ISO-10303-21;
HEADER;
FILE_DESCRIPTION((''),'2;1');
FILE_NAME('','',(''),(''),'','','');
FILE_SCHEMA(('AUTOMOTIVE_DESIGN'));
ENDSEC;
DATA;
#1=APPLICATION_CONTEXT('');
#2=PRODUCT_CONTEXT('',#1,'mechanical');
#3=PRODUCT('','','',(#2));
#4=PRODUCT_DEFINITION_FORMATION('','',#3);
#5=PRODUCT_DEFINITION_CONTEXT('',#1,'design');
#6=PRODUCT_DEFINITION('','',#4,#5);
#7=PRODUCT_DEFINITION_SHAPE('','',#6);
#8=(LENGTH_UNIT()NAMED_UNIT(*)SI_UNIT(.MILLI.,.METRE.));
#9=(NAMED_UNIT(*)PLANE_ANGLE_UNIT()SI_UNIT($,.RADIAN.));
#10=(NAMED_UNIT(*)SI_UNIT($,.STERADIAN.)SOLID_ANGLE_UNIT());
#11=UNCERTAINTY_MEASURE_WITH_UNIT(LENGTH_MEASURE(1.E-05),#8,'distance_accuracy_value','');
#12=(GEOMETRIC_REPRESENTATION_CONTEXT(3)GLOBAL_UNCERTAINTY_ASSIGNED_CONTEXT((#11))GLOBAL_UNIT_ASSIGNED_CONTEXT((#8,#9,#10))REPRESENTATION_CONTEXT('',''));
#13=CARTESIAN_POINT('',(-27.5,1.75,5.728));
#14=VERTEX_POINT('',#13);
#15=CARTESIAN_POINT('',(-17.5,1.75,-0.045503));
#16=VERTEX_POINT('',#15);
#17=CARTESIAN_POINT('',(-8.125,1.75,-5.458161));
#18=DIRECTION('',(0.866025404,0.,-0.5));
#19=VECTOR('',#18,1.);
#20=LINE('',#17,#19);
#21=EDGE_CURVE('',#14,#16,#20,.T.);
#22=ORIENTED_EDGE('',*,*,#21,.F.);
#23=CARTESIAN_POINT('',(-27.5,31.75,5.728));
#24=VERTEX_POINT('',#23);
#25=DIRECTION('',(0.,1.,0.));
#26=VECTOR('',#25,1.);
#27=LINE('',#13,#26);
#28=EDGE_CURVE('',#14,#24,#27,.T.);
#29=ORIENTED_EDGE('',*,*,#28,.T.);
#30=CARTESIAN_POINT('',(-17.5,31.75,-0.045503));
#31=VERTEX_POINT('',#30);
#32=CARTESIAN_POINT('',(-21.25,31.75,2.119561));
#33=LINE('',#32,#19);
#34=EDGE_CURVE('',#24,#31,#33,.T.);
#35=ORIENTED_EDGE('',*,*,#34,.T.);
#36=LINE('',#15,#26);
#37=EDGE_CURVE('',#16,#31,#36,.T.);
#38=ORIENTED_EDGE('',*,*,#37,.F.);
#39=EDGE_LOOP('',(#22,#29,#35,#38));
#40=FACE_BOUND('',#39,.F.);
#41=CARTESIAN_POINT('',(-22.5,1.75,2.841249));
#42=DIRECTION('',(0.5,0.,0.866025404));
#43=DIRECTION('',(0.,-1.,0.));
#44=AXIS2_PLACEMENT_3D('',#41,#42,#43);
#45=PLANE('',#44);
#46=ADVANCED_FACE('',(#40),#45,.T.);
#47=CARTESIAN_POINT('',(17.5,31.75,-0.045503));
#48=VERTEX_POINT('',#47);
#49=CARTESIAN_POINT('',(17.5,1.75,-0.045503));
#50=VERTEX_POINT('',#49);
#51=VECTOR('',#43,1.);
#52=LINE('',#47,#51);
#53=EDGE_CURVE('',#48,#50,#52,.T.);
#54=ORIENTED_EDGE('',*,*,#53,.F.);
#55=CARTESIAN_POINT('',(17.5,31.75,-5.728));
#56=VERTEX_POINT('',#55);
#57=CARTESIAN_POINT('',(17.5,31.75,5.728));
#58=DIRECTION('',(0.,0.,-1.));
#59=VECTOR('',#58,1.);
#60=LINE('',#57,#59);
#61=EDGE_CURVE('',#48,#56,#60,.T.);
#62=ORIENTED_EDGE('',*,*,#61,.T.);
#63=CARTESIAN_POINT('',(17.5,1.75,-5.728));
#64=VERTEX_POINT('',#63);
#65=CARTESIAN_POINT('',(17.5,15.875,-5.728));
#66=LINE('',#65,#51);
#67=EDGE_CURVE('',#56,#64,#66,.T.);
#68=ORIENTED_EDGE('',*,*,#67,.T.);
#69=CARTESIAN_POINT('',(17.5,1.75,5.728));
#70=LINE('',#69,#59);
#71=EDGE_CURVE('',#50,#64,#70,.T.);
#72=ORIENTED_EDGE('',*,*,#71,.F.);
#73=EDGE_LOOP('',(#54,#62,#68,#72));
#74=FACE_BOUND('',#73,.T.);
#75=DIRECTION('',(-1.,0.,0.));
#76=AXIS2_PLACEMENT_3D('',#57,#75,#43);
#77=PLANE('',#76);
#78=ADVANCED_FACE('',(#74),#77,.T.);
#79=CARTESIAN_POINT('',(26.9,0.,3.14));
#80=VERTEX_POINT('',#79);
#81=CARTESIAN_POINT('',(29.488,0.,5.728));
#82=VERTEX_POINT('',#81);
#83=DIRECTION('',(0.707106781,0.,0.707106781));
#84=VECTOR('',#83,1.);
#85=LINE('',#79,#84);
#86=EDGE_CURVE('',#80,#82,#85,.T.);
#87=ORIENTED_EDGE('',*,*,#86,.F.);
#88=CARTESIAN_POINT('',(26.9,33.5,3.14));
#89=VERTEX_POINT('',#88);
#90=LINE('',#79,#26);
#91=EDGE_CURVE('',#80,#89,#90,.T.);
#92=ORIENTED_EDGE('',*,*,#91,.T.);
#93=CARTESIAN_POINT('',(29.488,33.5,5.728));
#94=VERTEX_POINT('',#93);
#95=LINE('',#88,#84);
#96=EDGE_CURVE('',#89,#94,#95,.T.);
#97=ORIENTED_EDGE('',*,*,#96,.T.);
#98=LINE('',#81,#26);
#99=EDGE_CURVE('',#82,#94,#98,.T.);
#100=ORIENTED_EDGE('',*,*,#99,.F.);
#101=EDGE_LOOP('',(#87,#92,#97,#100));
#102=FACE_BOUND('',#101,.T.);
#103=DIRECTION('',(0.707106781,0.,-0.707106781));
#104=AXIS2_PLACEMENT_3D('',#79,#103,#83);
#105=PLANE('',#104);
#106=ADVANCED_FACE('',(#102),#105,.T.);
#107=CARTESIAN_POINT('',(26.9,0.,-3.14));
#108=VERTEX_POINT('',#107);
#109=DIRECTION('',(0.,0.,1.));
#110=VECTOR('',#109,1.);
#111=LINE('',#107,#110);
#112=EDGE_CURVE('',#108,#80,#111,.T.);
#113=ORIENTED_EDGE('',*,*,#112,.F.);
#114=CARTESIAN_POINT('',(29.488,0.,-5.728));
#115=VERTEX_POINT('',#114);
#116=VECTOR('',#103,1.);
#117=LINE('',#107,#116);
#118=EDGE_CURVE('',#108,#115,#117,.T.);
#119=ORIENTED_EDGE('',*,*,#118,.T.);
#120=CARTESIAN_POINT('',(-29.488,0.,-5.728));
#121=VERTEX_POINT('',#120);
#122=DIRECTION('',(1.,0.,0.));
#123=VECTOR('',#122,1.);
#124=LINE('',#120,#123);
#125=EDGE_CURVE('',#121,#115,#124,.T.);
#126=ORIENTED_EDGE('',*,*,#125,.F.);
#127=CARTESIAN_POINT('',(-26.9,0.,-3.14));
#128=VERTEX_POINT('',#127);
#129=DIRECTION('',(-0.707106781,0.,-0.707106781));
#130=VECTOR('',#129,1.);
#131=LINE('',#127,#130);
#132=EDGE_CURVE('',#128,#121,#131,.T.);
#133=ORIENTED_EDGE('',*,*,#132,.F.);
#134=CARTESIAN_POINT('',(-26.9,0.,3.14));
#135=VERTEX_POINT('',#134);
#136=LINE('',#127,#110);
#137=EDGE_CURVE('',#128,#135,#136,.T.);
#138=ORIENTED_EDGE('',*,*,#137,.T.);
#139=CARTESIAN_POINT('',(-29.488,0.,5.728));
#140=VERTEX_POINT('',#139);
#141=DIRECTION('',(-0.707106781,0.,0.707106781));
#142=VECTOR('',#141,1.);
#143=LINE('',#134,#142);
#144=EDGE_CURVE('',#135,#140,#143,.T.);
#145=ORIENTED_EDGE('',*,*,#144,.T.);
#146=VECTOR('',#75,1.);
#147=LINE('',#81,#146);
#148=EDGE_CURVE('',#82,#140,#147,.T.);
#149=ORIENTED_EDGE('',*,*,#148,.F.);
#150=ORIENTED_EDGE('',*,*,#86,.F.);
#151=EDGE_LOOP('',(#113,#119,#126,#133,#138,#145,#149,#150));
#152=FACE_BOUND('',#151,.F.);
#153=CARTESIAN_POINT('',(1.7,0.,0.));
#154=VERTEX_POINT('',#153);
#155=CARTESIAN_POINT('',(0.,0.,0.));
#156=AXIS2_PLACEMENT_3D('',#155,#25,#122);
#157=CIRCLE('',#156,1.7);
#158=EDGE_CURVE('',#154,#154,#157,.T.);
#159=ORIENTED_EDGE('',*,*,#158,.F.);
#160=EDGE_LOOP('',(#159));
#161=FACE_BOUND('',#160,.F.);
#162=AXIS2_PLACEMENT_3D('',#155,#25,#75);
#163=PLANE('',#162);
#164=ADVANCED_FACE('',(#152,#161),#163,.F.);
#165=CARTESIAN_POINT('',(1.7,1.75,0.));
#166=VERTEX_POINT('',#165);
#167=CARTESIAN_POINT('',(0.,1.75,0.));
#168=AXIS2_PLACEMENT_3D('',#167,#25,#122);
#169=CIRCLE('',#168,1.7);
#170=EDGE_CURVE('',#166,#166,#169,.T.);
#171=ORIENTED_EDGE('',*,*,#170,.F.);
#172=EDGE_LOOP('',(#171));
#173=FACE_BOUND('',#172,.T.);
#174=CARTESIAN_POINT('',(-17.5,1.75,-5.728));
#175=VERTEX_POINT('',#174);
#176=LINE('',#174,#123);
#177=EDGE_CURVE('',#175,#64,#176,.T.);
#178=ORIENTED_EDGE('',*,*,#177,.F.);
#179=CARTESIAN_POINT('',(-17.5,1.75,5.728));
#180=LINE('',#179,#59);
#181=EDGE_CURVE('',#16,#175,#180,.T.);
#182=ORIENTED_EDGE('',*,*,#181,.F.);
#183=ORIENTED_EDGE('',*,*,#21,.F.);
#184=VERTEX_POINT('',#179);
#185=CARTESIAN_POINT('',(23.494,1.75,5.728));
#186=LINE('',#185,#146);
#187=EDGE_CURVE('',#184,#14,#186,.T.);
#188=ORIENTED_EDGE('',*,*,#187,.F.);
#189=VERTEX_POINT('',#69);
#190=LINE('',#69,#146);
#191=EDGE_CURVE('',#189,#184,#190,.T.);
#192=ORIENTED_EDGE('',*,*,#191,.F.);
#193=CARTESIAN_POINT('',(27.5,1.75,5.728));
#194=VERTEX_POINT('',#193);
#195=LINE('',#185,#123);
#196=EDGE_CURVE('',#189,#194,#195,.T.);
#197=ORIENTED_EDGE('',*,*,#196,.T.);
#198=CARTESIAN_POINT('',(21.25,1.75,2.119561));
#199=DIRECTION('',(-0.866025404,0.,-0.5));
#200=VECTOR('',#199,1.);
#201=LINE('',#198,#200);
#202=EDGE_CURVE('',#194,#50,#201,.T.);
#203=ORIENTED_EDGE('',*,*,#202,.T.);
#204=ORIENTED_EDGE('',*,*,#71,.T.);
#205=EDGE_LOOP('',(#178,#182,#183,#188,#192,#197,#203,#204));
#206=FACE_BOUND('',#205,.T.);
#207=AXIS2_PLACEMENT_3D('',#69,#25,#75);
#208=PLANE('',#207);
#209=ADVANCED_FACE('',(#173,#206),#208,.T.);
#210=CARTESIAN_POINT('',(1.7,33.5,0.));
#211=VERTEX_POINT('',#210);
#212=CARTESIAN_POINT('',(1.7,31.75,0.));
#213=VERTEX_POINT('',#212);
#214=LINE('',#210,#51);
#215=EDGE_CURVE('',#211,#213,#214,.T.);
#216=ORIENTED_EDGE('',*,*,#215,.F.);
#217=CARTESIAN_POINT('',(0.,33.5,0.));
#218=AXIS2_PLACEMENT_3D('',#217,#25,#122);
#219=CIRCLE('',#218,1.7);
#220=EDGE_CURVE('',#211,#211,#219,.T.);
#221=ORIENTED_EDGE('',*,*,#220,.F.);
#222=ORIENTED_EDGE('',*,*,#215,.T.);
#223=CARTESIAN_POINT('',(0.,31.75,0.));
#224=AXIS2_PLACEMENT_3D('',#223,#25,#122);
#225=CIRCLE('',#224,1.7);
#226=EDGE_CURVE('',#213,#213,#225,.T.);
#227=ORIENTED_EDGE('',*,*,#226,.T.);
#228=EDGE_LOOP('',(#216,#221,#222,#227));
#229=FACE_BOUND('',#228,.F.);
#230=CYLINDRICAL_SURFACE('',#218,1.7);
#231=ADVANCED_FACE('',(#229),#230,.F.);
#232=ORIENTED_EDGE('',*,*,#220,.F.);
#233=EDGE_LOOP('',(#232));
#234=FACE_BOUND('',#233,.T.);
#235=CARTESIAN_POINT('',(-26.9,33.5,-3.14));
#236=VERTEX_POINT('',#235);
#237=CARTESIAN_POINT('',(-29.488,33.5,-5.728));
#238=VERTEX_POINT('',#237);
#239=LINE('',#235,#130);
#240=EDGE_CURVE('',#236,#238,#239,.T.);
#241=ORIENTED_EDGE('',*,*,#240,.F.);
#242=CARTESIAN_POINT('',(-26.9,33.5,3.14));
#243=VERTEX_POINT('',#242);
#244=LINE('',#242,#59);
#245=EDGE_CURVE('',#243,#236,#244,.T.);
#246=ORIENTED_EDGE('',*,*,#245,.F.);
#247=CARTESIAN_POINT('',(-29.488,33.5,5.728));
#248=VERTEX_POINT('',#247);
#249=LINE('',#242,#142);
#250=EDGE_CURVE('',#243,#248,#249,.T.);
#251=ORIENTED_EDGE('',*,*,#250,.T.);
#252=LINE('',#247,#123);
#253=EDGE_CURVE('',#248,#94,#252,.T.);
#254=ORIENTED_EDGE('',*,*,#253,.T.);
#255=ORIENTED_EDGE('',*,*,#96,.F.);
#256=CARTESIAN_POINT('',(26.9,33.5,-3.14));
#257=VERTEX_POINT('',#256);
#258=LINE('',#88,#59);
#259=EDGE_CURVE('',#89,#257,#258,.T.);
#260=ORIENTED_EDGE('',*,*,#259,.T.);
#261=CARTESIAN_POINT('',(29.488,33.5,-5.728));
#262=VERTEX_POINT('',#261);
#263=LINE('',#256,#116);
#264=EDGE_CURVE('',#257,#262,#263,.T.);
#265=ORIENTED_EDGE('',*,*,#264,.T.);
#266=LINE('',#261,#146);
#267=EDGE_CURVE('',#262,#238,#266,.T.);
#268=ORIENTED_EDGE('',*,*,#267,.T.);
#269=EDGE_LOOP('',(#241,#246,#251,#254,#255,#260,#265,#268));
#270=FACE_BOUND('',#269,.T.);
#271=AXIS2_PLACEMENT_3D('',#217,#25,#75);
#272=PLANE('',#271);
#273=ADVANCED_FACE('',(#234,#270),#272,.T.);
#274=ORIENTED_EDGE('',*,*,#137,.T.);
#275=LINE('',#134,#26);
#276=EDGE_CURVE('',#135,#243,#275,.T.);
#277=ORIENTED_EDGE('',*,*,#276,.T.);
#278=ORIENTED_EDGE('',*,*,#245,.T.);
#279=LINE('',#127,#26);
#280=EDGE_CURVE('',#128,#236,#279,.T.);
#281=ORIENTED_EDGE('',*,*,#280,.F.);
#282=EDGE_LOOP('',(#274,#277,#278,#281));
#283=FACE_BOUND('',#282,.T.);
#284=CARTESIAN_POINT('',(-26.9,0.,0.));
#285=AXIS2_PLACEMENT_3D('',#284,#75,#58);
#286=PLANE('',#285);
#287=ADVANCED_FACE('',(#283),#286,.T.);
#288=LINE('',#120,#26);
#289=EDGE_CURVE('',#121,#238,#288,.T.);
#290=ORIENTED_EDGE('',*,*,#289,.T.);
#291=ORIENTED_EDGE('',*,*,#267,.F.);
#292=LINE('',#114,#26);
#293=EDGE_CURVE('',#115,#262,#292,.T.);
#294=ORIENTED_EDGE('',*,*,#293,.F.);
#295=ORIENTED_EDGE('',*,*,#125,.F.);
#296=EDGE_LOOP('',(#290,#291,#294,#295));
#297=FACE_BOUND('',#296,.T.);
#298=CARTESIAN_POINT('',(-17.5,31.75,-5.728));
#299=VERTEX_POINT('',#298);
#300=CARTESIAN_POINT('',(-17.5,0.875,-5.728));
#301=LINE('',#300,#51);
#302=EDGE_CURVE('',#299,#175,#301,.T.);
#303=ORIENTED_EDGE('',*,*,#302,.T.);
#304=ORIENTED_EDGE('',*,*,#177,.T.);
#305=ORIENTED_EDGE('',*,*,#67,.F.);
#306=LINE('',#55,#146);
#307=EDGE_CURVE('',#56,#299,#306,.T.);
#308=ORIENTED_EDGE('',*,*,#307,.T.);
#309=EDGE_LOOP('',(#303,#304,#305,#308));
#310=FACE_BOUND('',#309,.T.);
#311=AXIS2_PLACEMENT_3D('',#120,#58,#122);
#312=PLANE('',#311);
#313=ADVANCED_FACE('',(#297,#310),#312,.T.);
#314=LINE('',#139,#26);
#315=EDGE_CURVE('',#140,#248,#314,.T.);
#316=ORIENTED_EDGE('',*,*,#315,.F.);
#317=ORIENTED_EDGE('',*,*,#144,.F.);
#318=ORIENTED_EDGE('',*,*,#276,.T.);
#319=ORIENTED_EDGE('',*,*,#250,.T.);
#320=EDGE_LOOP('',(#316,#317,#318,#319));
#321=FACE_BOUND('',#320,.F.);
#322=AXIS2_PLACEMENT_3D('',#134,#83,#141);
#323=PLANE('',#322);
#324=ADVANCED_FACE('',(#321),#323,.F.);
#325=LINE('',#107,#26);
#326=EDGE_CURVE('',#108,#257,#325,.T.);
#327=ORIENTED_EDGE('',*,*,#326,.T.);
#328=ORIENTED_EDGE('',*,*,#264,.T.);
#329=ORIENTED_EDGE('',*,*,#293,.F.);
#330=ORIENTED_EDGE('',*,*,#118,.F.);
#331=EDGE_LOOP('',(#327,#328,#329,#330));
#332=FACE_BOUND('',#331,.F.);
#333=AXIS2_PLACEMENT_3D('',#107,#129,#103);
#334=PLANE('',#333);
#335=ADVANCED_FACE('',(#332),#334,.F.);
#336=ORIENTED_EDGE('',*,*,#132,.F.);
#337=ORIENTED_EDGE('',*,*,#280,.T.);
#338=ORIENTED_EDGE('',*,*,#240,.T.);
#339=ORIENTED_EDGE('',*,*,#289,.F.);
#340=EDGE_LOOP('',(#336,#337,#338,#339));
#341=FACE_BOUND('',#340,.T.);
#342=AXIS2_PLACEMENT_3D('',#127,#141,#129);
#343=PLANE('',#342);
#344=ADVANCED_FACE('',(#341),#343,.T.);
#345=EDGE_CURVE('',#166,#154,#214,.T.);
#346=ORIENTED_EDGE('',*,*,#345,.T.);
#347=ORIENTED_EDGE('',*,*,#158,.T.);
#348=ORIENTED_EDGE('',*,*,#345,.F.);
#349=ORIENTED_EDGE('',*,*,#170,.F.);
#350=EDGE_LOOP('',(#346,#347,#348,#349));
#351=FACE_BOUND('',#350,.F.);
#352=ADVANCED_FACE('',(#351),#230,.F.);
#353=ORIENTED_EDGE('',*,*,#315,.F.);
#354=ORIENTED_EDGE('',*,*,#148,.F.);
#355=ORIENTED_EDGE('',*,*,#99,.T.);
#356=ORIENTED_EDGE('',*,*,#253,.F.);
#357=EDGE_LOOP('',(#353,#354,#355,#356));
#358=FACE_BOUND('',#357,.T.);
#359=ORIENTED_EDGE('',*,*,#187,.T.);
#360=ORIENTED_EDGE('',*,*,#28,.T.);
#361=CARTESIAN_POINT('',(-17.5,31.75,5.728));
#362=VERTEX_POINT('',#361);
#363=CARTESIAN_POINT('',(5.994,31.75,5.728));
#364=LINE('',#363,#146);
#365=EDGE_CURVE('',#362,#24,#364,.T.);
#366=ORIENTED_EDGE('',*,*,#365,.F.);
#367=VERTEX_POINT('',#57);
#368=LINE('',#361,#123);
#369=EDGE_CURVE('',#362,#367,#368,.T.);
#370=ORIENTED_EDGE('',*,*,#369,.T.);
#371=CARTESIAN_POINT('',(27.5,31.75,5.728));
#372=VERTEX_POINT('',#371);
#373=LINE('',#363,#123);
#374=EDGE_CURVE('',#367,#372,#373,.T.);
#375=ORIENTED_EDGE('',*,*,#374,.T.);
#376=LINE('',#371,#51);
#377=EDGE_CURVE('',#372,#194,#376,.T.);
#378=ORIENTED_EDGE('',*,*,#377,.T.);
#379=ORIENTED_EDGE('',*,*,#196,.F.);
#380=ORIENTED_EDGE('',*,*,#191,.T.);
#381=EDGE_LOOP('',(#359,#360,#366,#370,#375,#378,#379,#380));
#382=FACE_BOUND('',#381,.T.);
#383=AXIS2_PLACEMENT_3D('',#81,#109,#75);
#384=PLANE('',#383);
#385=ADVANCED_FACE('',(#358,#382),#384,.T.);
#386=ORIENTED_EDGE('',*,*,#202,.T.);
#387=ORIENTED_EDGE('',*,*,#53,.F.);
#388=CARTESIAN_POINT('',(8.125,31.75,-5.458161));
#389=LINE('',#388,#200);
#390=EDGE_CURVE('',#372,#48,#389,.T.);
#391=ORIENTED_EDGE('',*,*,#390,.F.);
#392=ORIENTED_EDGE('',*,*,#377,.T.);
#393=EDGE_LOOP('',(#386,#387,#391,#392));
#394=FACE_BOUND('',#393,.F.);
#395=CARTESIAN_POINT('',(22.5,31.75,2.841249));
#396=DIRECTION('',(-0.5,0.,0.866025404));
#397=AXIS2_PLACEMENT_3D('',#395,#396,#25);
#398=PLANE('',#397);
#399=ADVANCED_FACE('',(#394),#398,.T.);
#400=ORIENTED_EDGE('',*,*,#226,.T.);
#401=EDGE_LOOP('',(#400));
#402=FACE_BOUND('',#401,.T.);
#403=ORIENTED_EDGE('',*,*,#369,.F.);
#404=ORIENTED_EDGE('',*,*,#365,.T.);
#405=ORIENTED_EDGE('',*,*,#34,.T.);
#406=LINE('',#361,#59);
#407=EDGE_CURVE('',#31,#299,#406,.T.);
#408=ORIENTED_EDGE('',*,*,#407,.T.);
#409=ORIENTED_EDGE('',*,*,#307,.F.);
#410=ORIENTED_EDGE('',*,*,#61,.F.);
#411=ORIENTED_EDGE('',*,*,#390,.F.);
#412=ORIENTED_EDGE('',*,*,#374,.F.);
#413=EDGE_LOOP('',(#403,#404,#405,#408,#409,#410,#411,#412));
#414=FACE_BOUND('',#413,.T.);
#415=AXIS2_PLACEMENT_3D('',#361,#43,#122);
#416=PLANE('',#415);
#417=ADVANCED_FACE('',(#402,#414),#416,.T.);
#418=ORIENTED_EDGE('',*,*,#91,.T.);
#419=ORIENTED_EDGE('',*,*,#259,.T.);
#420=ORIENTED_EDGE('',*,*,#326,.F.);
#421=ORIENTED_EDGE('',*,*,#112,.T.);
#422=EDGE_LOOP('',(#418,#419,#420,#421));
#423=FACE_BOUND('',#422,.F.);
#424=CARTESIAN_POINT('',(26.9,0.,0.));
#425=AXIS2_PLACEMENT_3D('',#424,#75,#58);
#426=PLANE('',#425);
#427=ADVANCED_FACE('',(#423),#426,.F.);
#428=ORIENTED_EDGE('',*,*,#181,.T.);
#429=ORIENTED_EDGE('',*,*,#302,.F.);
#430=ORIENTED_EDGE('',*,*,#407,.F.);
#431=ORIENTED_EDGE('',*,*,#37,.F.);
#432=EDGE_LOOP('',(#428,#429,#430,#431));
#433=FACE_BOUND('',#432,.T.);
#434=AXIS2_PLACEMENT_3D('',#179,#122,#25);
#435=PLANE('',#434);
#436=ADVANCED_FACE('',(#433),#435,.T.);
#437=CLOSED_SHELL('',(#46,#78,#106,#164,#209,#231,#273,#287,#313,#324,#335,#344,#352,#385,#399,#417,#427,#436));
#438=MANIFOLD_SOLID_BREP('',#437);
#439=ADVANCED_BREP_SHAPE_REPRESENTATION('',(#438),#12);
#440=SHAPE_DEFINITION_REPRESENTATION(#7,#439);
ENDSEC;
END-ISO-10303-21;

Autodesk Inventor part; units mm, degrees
ref_plane "YZ Plane" through (0, 0, 0) normal (1, 0, 0) x (0, 1, 0)
ref_plane "XZ Plane" through (0, 0, 0) normal (0, 1, 0) x (-1, 0, 0)
ref_plane "XY Plane" through (0, 0, 0) normal (0, 0, 1) x (1, 0, 0)
sketch "Sketch1" plane through (0, 0, 0) normal (0, 1, 0) x (-1, 0, 0)
  line L0 (41.2832, 0) -> (-41.2832, 0) construction
  line L1 (0, -8.0192) -> (0, 8.0192) construction
  line L2 (26.9, 0) -> (26.9, -3.14)
  line L3 (26.9, -3.14) -> (29.488, -5.728)
  line L4 (29.488, -5.728) -> (0, -5.728)
  line L5 (26.9, 0) -> (26.9, 3.14)
  line L6 (26.9, 3.14) -> (29.488, 5.728)
  line L7 (29.488, 5.728) -> (0, 5.728)
  line L8 (-26.9, 0) -> (-26.9, -3.14)
  line L9 (-26.9, -3.14) -> (-29.488, -5.728)
  line L10 (-29.488, -5.728) -> (0, -5.728)
  line L11 (-26.9, 0) -> (-26.9, 3.14)
  line L12 (-26.9, 3.14) -> (-29.488, 5.728)
  line L13 (-29.488, 5.728) -> (0, 5.728)
  point P0 (0, 0)
  dimension "d0" = 26.9
  dimension "d1" = 3.14
  dimension "d2" = 3.66
  dimension "d3" = 135
extrude "Extrusion1" add sketch "Sketch1" along normal blind 33.5
sketch "Sketch2" plane through (-29.488, 0, 5.728) normal (0, 0, 1) x (1, 0, 0)
  line L0 (58.976, 0) -> (0, 0) construction
  line L1 (58.976, 0) -> (58.976, 33.5) construction
  line L2 (0, 33.5) -> (58.976, 33.5) construction
  line L3 (0, 0) -> (0, 33.5) construction
  line L4 (29.488, -6.8) -> (29.488, 40.8) construction
  line L5 (46.988, 1.75) -> (11.988, 1.75)
  line L6 (11.988, 1.75) -> (11.988, 31.75)
  line L7 (11.988, 31.75) -> (46.988, 31.75)
  line L8 (46.988, 31.75) -> (46.988, 1.75)
  line L9 (46.988, 1.75) -> (11.988, 31.75) construction
  line L10 (11.988, 1.75) -> (46.988, 31.75) construction
  point P0 (29.488, 16.75)
  dimension "d16" = 30
  dimension "d17" = 35
  dimension "d18" = 16.75
extrude "Extrusion2" cut sketch "Sketch2" against normal through all
sketch "Sketch3" plane through (0, 33.5, 0) normal (0, 1, 0) x (1, 0, 0)
  line L0 (-26.9, 3.14) -> (-26.9, -3.14) construction
  line L1 (-26.9, -3.14) -> (-29.488, -5.728) construction
  line L2 (-29.488, -5.728) -> (29.488, -5.728) construction
  line L3 (29.488, -5.728) -> (26.9, -3.14) construction
  line L4 (26.9, -3.14) -> (26.9, 3.14) construction
  line L5 (26.9, 3.14) -> (29.488, 5.728) construction
  line L6 (29.488, 5.728) -> (-29.488, 5.728) construction
  line L7 (-29.488, 5.728) -> (-26.9, 3.14) construction
  circle A0 centre (0, 0) radius 1.7
  dimension "d10" = 3.4
extrude "Extrusion3" cut sketch "Sketch3" against normal through all
ref_plane "Work Plane1" through (0, 29.5, 5.728) normal (0, -1, 0) x (1, 0, 0)
sketch "Sketch4" plane through (0, 29.5, 5.728) normal (0, -1, 0) x (1, 0, 0)
  circle A0 centre (0, -5.728) radius 1.7 construction
  line L0 (-26.9, -8.868) -> (-26.9, -2.588) construction
  line L1 (-26.9, -2.588) -> (-29.488, 0) construction
  line L2 (-29.488, 0) -> (29.488, 0) construction
  line L3 (29.488, 0) -> (26.9, -2.588) construction
  line L4 (26.9, -2.588) -> (26.9, -8.868) construction
  line L5 (26.9, -8.868) -> (29.488, -11.456) construction
  line L6 (29.488, -11.456) -> (-29.488, -11.456) construction
  line L7 (-29.488, -11.456) -> (-26.9, -8.868) construction
  line L8 (12.5, 0) -> (12.5, -11.456) construction
  line L9 (-12.5, 0) -> (-12.5, -11.456) construction
  line L10 (0, -5.728) -> (21.3772, 0)
  line L11 (0, -5.728) -> (22.1313, -5.728) construction
  line L12 (0, -13.7472) -> (0, 2.2912) construction
  line L13 (0, -5.728) -> (-21.3772, 0)
  line L14 (-21.3772, 0) -> (21.3772, 0)
  line L15 (29.488, 0) -> (-29.488, 0) construction
  dimension "d13" = 15
extrude "Extrusion4" [suppressed]
chamfer "Chamfer1" distance 10 angle 30 2 edges at (-17.5, 16.75, 5.728) (17.5, 16.75, 5.728) measured on face at (25.492, 11.75, 5.728)
equation "\"d18\" = 0.5 * d4"
equation "\"d4\" = 33.5"
